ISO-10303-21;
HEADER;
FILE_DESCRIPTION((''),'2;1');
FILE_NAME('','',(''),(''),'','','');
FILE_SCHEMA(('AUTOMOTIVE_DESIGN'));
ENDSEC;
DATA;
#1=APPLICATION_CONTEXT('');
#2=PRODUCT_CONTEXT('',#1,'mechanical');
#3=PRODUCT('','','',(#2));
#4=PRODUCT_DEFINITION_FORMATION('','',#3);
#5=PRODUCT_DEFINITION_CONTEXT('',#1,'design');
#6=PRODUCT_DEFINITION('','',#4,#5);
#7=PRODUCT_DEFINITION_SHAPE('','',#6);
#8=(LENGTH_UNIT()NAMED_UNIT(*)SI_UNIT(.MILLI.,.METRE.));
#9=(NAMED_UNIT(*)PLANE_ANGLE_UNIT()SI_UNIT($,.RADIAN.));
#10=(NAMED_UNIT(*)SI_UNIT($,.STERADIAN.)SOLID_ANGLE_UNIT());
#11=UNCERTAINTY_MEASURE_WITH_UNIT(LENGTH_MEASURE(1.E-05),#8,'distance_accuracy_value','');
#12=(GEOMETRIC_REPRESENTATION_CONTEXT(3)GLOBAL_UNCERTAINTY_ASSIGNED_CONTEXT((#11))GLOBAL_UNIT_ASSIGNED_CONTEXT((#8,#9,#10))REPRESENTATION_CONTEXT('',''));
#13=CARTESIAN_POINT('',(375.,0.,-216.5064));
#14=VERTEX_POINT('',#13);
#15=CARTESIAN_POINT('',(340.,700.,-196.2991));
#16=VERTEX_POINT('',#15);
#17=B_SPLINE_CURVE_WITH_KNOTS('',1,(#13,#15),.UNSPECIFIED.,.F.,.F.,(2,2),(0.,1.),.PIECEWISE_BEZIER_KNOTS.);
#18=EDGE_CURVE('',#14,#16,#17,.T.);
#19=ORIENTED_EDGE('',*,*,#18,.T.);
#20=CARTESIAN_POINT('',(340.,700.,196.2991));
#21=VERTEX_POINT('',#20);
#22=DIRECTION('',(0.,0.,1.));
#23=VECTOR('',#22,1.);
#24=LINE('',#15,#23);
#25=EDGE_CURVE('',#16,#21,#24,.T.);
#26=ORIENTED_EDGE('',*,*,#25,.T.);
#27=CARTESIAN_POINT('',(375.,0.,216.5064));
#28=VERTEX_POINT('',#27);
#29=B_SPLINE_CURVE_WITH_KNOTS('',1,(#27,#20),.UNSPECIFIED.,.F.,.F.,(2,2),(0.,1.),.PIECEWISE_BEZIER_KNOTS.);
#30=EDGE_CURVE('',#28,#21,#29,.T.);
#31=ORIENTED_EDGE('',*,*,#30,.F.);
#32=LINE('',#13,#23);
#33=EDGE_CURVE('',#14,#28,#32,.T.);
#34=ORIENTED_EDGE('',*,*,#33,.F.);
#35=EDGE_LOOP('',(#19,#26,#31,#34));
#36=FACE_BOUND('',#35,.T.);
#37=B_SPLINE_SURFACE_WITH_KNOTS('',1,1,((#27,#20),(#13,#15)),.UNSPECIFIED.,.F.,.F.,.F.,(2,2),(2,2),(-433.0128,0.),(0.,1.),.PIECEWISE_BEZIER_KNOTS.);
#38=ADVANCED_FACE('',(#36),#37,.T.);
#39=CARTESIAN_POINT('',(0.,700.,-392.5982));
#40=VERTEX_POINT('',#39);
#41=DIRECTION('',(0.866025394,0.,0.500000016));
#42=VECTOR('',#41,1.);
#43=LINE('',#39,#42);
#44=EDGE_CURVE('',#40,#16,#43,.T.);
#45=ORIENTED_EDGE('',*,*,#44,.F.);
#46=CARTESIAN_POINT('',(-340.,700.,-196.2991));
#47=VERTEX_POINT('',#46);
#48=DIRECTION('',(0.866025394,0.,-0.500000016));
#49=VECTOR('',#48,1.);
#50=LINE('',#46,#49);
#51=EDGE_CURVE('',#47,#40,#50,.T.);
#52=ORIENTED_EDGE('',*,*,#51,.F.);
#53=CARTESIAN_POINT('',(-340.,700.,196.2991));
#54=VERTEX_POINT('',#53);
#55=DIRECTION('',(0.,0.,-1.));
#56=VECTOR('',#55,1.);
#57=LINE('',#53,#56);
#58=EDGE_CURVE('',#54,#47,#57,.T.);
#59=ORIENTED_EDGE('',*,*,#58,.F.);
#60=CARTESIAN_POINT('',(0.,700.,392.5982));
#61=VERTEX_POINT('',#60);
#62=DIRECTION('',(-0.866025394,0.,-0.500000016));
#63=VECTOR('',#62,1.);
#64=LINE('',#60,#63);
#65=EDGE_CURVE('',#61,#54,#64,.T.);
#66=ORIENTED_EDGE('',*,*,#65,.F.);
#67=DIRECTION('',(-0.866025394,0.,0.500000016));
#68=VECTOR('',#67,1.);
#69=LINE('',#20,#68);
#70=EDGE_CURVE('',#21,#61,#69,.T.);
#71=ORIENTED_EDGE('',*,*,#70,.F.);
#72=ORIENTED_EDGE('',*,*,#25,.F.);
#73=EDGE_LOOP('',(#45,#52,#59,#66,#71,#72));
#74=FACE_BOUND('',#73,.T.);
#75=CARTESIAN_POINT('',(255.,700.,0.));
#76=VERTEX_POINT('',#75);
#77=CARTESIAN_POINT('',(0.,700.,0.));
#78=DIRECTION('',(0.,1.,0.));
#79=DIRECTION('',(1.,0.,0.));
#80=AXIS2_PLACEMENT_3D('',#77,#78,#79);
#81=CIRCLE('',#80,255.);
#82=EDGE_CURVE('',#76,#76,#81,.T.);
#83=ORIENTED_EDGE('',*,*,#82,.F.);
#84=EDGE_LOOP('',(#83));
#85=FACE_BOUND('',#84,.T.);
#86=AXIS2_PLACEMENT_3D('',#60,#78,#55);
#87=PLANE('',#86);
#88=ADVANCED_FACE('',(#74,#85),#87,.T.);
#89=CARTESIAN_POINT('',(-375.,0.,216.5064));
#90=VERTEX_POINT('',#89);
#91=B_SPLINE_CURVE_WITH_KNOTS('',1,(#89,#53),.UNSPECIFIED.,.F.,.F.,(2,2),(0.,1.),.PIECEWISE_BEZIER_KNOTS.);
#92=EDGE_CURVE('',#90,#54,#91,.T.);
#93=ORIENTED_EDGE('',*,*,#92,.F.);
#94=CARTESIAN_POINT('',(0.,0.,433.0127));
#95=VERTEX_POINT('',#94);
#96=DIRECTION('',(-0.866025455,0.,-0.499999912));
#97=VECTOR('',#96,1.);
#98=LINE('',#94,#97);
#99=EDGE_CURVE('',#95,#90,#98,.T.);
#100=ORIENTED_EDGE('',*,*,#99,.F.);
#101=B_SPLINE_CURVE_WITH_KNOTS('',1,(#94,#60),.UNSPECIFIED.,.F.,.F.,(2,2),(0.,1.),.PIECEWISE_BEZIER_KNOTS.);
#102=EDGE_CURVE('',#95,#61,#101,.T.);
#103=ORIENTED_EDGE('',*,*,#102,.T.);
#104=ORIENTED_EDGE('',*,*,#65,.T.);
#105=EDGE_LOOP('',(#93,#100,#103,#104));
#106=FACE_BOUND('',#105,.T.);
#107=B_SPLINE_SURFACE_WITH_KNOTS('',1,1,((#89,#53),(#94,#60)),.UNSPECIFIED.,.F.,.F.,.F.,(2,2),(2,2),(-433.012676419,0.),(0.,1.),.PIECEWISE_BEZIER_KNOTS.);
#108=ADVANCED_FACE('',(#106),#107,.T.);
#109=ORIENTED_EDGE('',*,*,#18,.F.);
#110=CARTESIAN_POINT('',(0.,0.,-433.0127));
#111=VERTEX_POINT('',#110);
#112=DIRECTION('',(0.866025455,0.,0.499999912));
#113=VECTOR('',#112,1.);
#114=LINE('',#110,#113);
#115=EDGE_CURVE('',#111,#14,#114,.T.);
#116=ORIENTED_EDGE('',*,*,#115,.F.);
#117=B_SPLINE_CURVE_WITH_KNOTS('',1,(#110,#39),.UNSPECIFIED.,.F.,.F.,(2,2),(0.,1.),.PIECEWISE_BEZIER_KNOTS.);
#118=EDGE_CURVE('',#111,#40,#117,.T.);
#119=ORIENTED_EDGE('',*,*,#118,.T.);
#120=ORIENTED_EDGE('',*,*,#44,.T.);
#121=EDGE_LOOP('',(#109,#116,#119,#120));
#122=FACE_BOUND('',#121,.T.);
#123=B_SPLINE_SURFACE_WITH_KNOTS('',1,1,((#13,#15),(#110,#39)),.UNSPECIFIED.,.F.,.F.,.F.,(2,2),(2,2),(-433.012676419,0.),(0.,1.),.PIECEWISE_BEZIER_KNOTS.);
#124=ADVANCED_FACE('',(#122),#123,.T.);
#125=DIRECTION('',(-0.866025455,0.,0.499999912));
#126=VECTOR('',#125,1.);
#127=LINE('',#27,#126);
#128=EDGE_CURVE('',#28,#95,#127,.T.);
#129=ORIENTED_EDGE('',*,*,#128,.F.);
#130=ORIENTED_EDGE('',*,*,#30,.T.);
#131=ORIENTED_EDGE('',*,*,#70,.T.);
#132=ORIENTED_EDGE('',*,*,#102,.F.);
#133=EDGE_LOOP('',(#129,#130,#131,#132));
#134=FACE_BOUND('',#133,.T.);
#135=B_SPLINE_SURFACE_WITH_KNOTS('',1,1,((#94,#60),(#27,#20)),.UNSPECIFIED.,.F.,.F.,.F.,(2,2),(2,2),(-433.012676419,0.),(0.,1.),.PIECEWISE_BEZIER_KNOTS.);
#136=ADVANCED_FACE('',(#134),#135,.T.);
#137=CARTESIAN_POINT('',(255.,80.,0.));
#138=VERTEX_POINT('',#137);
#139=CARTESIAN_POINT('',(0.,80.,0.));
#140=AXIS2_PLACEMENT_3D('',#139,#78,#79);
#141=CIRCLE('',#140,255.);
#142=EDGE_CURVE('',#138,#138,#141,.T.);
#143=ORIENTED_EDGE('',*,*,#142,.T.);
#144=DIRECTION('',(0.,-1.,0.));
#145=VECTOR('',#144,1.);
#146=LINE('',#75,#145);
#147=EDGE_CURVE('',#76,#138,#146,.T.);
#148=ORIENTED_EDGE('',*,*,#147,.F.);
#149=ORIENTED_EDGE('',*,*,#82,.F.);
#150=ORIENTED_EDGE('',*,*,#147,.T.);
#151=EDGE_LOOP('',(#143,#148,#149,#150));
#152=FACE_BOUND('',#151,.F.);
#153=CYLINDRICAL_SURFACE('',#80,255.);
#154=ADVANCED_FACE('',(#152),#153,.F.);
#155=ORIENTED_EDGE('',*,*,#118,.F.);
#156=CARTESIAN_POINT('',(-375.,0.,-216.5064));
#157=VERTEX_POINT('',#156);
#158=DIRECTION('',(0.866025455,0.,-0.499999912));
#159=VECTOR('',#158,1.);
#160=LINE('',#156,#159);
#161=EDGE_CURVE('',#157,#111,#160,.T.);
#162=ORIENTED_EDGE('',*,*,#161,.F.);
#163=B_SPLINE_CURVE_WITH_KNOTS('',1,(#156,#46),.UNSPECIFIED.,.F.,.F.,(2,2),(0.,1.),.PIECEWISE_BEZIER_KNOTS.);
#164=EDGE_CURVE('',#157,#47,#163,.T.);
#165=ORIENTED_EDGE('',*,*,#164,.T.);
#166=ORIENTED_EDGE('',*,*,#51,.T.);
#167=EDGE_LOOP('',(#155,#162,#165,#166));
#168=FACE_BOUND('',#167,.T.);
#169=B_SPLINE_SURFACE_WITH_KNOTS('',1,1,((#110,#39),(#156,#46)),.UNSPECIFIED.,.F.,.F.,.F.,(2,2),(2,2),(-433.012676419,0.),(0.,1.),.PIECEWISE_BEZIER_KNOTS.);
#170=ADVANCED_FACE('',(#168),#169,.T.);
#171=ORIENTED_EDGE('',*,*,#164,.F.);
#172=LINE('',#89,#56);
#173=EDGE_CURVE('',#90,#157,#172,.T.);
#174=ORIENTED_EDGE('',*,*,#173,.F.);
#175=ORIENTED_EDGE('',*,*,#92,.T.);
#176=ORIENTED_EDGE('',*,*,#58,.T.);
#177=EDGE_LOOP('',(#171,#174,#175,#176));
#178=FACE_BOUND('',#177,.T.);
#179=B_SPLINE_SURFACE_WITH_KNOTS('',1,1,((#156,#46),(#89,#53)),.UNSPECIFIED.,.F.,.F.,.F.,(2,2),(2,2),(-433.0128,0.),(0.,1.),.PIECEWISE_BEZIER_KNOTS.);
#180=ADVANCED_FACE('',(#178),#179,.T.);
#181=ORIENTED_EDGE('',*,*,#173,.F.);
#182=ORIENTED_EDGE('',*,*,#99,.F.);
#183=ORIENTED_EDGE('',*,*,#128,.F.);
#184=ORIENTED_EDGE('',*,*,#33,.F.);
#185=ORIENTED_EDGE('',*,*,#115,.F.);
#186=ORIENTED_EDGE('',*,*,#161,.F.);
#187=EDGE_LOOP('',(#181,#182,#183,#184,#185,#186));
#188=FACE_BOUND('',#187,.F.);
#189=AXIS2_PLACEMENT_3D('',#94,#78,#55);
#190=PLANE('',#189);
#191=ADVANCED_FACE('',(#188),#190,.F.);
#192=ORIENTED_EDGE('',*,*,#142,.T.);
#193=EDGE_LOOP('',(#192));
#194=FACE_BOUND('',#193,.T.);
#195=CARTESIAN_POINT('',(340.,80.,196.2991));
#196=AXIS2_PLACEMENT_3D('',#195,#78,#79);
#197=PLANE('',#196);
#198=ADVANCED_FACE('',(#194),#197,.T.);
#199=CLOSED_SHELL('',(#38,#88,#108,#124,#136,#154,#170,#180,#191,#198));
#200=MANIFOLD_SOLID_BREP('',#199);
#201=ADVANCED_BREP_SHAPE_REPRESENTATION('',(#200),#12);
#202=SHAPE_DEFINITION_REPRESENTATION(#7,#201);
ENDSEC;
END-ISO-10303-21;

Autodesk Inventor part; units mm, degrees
ref_plane "YZ Plane" through (0, 0, 0) normal (1, 0, 0) x (0, 1, 0)
ref_plane "XY Plane" through (0, 0, 0) normal (0, 0, 1) x (1, 0, 0)
sketch "Sketch1" plane through (0, 0, 0) normal (0, 1, 0) x (-1, 0, 0)
  line L0 (0, -433.0127) -> (-375, -216.5064)
  line L1 (-375, -216.5064) -> (-375, 216.5064)
  line L2 (-375, 216.5064) -> (0, 433.0127)
  line L3 (0, 433.0127) -> (375, 216.5064)
  line L4 (375, 216.5064) -> (375, -216.5064)
  line L5 (375, -216.5064) -> (0, -433.0127)
  line L6 (0, -606.2178) -> (0, 606.2178) projected
  point P0 (0, 0)
  point P1 (0, 0)
  dimension "d0" = 750
ref_plane "Work Plane1" through (0, 700, 0) normal (0, 1, 0) x (-1, 0, 0)
sketch "Sketch2" plane through (0, 700, 0) normal (0, 1, 0) x (-1, 0, 0)
  line L0 (0, -392.5982) -> (-340, -196.2991)
  line L1 (-340, -196.2991) -> (-340, 196.2991)
  line L2 (-340, 196.2991) -> (0, 392.5982)
  line L3 (0, 392.5982) -> (340, 196.2991)
  line L4 (340, 196.2991) -> (340, -196.2991)
  line L5 (340, -196.2991) -> (0, -392.5982)
  point P0 (0, 0)
  point P1 (0, 0)
  dimension "d2" = 680
loft "Loft1" add profiles "Sketch1", "Sketch2"
sketch "Sketch3" plane through (340, 700, 196.2991) normal (0, 1, 0) x (1, 0, 0)
  circle A0 centre (-340, 196.2991) radius 255
  dimension "d7" = 510
extrude "Extrusion1" cut sketch "Sketch3" against normal blind 620
properties part number "smietnik1" material "Concrete"
